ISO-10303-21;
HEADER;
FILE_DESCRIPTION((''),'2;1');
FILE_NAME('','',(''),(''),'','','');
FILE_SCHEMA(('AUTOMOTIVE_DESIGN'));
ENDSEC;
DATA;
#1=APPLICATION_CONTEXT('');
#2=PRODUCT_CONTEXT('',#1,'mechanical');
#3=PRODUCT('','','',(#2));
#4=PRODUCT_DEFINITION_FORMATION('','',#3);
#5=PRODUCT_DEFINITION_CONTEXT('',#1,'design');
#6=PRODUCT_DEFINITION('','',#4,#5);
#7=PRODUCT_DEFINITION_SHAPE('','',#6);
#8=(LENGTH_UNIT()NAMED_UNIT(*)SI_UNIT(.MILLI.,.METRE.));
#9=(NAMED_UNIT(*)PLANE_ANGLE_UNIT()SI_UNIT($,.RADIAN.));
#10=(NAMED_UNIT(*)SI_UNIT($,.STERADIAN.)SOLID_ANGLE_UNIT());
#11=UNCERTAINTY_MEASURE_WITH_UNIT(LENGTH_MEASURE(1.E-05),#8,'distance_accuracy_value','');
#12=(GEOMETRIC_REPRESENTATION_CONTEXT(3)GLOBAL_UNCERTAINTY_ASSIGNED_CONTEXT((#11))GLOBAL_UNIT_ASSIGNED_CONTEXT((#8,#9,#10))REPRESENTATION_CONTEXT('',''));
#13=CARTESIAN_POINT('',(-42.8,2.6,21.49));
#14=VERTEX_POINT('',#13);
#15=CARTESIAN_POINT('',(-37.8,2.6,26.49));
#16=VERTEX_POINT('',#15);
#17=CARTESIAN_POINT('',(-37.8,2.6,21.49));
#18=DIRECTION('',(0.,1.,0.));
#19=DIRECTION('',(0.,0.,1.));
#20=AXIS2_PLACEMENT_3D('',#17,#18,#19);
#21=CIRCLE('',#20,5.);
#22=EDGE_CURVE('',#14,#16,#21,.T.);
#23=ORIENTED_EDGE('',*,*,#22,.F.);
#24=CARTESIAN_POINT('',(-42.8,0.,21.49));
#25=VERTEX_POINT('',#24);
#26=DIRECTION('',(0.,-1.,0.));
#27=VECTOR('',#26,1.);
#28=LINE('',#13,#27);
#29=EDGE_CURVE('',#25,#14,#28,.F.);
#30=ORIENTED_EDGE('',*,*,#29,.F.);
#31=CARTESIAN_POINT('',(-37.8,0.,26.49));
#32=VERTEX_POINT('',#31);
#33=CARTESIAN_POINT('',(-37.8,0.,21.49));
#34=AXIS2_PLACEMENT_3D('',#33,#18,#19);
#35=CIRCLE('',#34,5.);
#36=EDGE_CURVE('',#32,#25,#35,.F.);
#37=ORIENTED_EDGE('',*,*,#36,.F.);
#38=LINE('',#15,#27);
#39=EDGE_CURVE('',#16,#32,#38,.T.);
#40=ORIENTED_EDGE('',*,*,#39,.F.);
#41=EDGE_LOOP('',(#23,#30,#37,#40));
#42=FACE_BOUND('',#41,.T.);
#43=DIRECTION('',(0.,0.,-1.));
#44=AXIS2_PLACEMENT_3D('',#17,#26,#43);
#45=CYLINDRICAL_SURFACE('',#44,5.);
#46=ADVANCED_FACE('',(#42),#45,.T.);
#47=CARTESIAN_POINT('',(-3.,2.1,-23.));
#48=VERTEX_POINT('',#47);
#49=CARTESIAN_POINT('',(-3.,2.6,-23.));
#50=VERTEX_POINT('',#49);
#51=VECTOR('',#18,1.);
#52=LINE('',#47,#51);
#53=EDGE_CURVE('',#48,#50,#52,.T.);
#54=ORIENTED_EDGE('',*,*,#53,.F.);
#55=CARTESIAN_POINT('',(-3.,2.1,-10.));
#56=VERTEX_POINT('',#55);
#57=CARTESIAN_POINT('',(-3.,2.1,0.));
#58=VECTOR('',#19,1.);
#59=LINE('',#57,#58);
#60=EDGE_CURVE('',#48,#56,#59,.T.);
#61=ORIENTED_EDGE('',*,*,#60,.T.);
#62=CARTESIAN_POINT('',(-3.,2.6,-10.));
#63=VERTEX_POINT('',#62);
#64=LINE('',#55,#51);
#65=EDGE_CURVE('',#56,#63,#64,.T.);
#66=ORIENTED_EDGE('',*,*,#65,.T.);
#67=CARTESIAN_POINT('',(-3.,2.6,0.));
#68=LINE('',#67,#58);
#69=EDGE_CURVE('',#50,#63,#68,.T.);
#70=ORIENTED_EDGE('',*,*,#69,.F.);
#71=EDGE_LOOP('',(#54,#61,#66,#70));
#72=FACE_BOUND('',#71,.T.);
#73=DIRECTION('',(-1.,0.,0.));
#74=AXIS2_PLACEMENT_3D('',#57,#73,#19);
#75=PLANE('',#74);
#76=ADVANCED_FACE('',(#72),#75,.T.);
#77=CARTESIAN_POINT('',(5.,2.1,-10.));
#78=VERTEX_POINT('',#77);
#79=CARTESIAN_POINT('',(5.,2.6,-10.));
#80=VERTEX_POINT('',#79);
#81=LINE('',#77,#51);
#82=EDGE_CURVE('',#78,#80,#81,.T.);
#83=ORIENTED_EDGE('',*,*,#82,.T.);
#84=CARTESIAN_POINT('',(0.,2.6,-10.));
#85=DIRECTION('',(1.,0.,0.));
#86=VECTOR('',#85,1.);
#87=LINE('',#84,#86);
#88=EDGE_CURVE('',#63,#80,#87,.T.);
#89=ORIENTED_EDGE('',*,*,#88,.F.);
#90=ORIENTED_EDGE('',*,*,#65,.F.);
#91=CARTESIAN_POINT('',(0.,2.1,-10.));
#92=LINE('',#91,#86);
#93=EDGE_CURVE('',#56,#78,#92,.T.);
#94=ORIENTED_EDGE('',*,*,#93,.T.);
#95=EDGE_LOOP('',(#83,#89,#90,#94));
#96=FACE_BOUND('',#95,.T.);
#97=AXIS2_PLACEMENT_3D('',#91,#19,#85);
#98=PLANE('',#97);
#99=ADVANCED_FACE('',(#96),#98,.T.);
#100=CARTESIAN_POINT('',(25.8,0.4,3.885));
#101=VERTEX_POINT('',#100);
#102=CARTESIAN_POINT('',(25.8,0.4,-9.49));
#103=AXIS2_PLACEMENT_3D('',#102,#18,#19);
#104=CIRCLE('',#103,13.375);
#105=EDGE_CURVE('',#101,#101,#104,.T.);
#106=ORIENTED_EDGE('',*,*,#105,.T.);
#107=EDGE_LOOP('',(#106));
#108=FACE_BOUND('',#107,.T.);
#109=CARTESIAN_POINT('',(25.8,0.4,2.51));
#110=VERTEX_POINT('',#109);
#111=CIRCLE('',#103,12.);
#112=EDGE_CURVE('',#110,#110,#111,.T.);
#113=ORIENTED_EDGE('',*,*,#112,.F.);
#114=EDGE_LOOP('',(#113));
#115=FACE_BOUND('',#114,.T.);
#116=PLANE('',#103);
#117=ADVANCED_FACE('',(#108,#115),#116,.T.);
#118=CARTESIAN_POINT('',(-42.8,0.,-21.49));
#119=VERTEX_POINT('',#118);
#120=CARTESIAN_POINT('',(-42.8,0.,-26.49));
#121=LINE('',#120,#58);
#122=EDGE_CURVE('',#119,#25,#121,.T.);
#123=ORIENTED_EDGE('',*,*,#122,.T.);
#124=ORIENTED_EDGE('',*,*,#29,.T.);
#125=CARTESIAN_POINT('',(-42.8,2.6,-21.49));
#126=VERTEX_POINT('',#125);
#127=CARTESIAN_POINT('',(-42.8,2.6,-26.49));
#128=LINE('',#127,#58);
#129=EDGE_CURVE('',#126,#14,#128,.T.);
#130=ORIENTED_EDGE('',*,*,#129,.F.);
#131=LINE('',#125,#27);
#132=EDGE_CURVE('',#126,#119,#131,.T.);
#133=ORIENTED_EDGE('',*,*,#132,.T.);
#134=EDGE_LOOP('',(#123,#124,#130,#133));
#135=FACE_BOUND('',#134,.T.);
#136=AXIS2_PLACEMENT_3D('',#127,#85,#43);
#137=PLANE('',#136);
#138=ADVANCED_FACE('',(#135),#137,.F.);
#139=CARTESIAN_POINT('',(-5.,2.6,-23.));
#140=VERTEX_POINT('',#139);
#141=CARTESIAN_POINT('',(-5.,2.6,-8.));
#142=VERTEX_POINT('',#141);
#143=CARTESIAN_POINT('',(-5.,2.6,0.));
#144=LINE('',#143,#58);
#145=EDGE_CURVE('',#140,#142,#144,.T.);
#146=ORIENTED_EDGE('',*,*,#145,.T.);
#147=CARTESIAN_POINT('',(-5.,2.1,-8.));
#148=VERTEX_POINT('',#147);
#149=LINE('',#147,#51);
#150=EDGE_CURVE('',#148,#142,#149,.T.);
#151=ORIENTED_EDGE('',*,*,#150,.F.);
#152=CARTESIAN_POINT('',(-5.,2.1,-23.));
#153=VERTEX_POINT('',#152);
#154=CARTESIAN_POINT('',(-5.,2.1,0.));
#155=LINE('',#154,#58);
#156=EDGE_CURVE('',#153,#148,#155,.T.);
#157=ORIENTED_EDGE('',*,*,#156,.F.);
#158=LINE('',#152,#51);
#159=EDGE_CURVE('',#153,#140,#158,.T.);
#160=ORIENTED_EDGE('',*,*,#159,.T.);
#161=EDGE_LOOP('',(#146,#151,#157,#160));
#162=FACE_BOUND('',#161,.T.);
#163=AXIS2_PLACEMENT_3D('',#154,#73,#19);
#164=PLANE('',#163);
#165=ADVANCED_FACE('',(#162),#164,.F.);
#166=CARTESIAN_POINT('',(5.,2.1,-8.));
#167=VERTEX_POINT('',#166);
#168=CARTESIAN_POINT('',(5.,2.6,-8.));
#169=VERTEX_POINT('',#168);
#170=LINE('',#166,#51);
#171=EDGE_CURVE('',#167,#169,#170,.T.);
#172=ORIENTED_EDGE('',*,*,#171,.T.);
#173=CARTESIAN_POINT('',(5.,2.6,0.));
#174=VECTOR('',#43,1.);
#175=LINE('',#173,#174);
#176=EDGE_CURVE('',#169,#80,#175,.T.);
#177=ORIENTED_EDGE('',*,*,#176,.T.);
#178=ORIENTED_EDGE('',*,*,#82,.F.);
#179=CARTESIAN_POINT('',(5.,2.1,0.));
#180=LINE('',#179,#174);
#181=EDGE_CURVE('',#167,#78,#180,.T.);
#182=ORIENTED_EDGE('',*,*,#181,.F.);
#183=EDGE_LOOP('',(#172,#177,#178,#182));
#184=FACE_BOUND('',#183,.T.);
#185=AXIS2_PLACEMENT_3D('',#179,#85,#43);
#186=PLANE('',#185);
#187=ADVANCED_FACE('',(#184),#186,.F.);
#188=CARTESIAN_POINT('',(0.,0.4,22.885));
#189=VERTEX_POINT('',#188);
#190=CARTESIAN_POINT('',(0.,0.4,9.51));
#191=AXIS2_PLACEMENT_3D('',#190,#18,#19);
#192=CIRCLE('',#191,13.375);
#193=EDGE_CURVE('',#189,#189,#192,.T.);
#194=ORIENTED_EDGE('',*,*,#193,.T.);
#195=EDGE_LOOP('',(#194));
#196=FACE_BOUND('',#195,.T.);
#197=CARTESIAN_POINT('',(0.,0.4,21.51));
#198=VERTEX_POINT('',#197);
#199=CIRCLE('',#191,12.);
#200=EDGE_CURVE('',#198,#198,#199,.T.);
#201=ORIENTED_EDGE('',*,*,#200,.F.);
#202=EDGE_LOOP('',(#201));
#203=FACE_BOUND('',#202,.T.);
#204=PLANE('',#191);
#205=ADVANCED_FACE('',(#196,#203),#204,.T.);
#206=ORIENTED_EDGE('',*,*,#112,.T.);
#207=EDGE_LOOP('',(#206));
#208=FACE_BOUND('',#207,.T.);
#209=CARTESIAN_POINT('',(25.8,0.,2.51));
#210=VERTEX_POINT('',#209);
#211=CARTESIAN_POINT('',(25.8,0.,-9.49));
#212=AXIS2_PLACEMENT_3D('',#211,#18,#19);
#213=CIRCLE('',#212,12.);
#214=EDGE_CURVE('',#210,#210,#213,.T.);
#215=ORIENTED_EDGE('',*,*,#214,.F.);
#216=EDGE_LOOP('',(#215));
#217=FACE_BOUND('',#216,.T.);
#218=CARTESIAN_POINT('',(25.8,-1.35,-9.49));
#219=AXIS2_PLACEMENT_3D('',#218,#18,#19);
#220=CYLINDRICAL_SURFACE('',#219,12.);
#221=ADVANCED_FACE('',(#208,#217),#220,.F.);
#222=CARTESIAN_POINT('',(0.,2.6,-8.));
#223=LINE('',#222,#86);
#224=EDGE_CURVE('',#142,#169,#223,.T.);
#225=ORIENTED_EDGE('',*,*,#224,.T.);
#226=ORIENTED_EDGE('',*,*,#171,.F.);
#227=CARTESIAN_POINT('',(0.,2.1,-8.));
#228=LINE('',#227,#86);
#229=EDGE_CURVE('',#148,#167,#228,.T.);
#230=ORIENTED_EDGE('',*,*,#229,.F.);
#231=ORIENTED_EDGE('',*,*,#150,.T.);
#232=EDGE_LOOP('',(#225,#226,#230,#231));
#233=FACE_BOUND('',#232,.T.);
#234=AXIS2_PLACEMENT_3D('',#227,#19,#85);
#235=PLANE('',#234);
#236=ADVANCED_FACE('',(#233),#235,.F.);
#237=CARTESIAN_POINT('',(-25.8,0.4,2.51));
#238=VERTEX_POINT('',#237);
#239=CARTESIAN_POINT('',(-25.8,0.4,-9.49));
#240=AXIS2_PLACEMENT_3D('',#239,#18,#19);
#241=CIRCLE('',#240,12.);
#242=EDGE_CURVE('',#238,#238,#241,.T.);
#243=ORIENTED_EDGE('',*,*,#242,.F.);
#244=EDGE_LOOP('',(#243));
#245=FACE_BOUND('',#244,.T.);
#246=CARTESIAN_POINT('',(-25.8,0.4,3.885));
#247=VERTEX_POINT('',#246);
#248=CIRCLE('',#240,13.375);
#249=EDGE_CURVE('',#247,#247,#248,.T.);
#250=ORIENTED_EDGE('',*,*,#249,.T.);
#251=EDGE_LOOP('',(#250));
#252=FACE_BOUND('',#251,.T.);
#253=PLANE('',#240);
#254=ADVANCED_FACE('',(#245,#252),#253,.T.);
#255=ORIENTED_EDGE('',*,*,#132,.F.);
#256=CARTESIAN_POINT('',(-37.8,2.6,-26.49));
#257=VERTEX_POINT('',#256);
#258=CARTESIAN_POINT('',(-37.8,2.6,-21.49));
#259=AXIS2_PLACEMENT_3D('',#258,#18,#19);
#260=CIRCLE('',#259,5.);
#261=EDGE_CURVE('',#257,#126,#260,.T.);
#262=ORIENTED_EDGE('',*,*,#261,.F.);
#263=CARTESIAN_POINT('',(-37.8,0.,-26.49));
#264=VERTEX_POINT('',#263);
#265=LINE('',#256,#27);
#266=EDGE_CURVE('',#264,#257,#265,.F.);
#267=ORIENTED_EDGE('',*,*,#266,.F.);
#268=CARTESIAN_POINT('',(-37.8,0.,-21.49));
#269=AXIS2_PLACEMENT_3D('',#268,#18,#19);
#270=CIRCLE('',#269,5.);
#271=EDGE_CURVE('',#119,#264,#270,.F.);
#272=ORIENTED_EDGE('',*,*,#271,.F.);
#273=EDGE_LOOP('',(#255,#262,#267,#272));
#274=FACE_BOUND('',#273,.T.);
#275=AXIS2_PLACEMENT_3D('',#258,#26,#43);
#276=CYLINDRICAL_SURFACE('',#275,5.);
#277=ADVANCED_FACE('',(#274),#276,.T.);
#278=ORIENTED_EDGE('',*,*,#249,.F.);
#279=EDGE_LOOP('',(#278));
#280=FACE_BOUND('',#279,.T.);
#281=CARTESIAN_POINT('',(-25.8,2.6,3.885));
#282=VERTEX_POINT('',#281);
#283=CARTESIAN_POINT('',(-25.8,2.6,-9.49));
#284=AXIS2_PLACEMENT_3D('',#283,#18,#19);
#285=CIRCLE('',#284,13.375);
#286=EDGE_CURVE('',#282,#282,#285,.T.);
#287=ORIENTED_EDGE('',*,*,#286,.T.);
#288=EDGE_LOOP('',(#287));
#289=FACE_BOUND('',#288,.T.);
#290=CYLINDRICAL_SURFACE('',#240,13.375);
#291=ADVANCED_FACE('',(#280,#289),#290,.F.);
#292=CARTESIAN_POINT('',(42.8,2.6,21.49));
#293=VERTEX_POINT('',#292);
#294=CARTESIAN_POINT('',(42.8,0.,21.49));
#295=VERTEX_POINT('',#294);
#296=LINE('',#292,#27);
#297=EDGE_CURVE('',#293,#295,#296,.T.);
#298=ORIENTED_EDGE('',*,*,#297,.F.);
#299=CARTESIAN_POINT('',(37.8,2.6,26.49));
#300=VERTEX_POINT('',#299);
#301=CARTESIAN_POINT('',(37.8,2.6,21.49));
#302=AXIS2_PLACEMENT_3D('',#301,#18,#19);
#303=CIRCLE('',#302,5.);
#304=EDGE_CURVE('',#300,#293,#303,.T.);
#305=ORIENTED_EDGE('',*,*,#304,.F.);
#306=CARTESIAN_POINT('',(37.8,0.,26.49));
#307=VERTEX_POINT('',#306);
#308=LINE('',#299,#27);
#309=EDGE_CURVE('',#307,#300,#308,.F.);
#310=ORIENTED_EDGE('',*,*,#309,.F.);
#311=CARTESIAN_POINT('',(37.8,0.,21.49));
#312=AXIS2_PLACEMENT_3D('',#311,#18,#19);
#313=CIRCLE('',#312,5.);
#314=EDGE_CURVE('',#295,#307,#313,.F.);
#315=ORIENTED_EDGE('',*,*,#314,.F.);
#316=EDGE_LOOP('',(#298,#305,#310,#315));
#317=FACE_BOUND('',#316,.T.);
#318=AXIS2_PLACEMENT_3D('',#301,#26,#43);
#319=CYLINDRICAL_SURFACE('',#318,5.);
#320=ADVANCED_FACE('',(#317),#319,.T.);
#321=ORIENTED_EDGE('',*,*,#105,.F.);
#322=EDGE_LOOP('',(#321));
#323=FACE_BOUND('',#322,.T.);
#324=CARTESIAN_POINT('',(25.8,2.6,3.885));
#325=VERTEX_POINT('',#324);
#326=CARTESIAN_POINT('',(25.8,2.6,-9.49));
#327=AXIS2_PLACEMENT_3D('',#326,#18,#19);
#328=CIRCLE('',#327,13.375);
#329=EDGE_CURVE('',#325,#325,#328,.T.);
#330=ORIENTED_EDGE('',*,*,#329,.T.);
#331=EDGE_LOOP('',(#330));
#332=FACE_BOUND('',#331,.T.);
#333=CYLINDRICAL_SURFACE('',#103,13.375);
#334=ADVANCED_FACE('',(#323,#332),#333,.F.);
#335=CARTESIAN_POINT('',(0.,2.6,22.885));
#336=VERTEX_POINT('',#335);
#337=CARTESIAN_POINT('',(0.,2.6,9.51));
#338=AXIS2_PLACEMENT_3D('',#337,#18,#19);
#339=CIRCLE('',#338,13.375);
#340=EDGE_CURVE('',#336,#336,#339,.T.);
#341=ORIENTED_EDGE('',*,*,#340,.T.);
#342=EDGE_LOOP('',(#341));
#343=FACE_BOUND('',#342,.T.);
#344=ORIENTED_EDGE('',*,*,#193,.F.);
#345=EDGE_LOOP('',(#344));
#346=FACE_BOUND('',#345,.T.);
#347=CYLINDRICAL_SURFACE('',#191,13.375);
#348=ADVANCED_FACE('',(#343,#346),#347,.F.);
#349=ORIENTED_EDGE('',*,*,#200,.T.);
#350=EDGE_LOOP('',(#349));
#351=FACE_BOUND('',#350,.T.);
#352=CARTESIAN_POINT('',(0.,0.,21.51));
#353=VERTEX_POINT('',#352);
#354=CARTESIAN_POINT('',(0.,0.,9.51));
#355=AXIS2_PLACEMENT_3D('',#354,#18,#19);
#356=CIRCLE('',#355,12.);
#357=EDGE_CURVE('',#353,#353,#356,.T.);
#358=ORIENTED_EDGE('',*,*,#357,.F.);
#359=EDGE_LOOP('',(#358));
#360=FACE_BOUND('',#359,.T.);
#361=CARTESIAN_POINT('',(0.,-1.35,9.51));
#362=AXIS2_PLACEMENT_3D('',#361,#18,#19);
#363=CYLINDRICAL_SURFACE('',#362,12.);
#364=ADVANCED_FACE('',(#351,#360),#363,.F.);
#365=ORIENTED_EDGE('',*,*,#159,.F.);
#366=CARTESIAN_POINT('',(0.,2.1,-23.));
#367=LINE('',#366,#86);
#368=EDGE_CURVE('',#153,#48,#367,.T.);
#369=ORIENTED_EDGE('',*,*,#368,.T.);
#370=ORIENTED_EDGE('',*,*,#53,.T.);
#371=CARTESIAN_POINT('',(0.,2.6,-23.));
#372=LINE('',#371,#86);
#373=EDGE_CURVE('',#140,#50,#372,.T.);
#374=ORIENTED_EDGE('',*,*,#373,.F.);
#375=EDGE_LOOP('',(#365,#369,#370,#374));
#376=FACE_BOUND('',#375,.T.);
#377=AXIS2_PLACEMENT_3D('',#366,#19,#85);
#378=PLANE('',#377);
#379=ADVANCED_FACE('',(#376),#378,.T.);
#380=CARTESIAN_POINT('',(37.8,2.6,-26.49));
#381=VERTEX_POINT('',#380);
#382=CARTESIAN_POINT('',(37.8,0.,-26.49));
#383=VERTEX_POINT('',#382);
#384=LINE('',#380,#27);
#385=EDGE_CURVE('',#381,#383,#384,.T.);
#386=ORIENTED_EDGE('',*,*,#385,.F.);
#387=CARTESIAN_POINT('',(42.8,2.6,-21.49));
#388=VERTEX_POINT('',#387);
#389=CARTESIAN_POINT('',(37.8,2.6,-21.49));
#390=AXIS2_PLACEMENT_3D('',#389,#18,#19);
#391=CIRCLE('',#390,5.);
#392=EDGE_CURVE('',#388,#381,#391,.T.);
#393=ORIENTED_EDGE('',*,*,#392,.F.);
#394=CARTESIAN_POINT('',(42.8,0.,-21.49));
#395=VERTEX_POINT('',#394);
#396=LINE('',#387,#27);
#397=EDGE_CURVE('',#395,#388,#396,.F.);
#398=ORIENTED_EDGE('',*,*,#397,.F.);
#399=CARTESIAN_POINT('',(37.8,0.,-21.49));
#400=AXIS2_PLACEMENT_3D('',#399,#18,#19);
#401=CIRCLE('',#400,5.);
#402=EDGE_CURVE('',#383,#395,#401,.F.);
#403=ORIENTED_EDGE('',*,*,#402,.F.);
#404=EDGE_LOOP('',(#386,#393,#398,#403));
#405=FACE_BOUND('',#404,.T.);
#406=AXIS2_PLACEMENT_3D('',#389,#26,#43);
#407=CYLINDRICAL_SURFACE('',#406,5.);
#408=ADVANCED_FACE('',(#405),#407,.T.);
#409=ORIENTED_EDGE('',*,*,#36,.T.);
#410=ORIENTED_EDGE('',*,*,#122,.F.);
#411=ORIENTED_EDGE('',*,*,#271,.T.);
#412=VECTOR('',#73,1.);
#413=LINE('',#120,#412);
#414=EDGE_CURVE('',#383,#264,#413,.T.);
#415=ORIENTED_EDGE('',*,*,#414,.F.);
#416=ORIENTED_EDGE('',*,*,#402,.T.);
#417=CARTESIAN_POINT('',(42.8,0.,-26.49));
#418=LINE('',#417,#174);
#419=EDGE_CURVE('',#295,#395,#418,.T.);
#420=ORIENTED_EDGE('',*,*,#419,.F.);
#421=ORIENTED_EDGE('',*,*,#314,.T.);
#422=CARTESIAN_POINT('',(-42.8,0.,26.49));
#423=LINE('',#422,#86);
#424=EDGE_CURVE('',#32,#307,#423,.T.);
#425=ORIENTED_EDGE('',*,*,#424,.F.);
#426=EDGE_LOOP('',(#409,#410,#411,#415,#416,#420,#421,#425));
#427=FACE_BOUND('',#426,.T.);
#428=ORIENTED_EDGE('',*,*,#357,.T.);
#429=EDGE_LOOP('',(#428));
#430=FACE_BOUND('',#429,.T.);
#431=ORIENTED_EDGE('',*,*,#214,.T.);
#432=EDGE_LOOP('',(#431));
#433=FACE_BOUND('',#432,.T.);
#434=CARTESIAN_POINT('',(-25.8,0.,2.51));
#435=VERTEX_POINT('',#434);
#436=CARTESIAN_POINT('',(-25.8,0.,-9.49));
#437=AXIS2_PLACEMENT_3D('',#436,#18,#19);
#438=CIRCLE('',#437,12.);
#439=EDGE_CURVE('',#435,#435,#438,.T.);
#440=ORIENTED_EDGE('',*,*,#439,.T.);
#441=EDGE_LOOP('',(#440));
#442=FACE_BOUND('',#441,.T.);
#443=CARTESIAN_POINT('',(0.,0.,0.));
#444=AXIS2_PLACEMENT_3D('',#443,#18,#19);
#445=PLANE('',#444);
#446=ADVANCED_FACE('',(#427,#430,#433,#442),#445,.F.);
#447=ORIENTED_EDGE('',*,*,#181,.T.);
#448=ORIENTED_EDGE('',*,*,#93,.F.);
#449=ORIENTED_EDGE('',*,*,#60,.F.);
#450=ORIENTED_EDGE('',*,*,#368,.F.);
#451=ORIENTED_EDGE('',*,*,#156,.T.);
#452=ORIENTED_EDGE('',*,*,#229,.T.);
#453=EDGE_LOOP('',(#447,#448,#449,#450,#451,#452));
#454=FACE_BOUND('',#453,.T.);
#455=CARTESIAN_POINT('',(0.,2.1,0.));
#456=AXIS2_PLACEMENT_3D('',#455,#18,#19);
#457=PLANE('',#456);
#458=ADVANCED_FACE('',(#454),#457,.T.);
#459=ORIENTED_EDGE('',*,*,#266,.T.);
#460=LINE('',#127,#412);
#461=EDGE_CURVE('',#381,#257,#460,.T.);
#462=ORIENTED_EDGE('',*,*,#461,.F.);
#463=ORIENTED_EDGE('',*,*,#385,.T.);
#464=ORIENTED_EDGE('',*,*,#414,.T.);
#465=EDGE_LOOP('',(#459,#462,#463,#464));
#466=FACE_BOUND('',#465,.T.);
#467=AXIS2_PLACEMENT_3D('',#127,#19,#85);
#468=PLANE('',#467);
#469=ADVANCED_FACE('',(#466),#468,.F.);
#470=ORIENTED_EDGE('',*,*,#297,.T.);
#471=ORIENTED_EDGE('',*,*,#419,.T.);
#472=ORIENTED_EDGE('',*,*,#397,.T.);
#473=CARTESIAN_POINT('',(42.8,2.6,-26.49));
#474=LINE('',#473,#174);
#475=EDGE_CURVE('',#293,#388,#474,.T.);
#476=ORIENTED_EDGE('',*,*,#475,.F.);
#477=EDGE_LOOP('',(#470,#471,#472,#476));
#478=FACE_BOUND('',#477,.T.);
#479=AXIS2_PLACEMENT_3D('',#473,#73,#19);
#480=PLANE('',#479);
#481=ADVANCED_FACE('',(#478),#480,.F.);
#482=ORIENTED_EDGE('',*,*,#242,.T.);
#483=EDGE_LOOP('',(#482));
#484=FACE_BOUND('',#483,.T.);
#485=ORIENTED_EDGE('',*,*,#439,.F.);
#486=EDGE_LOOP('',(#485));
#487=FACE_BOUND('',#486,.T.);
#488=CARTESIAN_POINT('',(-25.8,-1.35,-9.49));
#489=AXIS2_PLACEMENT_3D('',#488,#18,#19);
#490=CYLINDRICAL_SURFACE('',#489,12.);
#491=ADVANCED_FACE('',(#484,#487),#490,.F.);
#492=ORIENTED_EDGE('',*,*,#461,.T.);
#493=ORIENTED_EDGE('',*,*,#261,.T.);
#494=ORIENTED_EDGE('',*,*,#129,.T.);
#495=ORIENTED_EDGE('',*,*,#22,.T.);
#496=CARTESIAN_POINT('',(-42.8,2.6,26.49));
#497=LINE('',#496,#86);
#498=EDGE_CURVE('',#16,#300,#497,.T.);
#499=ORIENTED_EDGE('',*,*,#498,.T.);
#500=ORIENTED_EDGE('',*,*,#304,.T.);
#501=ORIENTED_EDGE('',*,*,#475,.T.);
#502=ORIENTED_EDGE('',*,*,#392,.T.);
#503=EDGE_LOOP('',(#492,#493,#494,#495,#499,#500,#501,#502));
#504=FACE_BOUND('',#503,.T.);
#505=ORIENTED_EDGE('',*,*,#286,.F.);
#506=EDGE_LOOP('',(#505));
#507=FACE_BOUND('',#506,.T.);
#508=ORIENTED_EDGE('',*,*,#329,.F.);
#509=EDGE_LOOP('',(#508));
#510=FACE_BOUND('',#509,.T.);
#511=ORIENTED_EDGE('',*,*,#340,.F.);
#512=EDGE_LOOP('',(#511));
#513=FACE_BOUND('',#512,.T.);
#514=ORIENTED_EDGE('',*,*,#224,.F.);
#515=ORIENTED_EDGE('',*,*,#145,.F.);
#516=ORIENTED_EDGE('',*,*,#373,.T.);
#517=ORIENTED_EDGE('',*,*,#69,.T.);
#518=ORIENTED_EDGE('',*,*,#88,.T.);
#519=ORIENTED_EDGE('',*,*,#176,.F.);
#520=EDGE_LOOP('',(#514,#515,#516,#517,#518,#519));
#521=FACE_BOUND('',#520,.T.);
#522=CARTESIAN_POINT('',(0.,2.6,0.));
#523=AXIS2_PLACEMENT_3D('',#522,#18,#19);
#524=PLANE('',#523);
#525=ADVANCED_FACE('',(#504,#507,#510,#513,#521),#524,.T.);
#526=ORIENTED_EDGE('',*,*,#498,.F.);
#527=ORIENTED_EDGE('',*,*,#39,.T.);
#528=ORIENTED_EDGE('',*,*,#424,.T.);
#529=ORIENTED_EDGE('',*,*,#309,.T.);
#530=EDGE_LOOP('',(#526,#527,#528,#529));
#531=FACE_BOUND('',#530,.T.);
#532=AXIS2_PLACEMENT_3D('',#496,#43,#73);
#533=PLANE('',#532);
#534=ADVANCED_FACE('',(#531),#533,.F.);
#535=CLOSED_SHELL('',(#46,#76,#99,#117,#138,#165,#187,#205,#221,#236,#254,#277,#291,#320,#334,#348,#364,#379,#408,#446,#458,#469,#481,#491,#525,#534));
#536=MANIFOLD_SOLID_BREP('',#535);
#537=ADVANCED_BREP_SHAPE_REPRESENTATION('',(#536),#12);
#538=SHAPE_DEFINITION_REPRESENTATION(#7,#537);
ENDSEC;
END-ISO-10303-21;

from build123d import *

# Parameters (mm, degrees)
SKETCH1_W           = 85.6
SKETCH1_H           = 52.98
BOSS_EXTRUDE1_DEPTH = 2.6
SKETCH2_R           = 13.375
CUT_EXTRUDE1_DEPTH  = 2.2
SKETCH3_R           = 12
CUT_EXTRUDE2_DEPTH  = 1.75
FILLET1_R           = 5
CUT_EXTRUDE3_DEPTH  = 0.5


with BuildPart() as part:
    # Sketch1 → Boss-Extrude1 (new body)
    with BuildSketch(Plane(origin=(0, 0, 0), x_dir=(1, 0, 0), z_dir=(0, 1, 0))):
        Rectangle(SKETCH1_W, SKETCH1_H)
    extrude(amount=BOSS_EXTRUDE1_DEPTH)

    # Sketch2 → Cut-Extrude1 (cut)
    with BuildSketch(Plane(origin=(0, 2.6, 0), x_dir=(1, 0, 0), z_dir=(0, 1, 0))):
        with Locations((-25.8, 9.49)):
            Circle(SKETCH2_R)
        with Locations((0, -9.51)):
            Circle(SKETCH2_R)
        with Locations((25.8, 9.49)):
            Circle(SKETCH2_R)
    extrude(amount=-CUT_EXTRUDE1_DEPTH, mode=Mode.SUBTRACT)

    # Sketch3 → Cut-Extrude2 (cut)
    with BuildSketch(Plane(origin=(0, 0.4, 0), x_dir=(1, 0, 0), z_dir=(0, 1, 0))):
        with Locations((-25.8, 9.49)):
            Circle(SKETCH3_R)
        with Locations((0, -9.51)):
            Circle(SKETCH3_R)
        with Locations((25.8, 9.49)):
            Circle(SKETCH3_R)
    extrude(amount=-CUT_EXTRUDE2_DEPTH, mode=Mode.SUBTRACT)

    # Fillet1
    fillet1_edges = [part.edges().sort_by_distance(p)[0] for p in [
        (42.8, 1.3, -26.49),
        (42.8, 1.3, 26.49),
        (-42.8, 1.3, 26.49),
        (-42.8, 1.3, -26.49),
    ]]
    fillet(fillet1_edges, radius=FILLET1_R)

    # Sketch4 → Cut-Extrude3 (cut)
    with BuildSketch(Plane(origin=(0, 2.6, 0), x_dir=(1, 0, 0), z_dir=(0, 1, 0))):
        Polygon((5, 10), (-3, 10), (-3, 23), (-5, 23), (-5, 10), (-5, 8), (-3, 8), (5, 8), align=None)
    extrude(amount=-CUT_EXTRUDE3_DEPTH, mode=Mode.SUBTRACT)


solid = part.part
